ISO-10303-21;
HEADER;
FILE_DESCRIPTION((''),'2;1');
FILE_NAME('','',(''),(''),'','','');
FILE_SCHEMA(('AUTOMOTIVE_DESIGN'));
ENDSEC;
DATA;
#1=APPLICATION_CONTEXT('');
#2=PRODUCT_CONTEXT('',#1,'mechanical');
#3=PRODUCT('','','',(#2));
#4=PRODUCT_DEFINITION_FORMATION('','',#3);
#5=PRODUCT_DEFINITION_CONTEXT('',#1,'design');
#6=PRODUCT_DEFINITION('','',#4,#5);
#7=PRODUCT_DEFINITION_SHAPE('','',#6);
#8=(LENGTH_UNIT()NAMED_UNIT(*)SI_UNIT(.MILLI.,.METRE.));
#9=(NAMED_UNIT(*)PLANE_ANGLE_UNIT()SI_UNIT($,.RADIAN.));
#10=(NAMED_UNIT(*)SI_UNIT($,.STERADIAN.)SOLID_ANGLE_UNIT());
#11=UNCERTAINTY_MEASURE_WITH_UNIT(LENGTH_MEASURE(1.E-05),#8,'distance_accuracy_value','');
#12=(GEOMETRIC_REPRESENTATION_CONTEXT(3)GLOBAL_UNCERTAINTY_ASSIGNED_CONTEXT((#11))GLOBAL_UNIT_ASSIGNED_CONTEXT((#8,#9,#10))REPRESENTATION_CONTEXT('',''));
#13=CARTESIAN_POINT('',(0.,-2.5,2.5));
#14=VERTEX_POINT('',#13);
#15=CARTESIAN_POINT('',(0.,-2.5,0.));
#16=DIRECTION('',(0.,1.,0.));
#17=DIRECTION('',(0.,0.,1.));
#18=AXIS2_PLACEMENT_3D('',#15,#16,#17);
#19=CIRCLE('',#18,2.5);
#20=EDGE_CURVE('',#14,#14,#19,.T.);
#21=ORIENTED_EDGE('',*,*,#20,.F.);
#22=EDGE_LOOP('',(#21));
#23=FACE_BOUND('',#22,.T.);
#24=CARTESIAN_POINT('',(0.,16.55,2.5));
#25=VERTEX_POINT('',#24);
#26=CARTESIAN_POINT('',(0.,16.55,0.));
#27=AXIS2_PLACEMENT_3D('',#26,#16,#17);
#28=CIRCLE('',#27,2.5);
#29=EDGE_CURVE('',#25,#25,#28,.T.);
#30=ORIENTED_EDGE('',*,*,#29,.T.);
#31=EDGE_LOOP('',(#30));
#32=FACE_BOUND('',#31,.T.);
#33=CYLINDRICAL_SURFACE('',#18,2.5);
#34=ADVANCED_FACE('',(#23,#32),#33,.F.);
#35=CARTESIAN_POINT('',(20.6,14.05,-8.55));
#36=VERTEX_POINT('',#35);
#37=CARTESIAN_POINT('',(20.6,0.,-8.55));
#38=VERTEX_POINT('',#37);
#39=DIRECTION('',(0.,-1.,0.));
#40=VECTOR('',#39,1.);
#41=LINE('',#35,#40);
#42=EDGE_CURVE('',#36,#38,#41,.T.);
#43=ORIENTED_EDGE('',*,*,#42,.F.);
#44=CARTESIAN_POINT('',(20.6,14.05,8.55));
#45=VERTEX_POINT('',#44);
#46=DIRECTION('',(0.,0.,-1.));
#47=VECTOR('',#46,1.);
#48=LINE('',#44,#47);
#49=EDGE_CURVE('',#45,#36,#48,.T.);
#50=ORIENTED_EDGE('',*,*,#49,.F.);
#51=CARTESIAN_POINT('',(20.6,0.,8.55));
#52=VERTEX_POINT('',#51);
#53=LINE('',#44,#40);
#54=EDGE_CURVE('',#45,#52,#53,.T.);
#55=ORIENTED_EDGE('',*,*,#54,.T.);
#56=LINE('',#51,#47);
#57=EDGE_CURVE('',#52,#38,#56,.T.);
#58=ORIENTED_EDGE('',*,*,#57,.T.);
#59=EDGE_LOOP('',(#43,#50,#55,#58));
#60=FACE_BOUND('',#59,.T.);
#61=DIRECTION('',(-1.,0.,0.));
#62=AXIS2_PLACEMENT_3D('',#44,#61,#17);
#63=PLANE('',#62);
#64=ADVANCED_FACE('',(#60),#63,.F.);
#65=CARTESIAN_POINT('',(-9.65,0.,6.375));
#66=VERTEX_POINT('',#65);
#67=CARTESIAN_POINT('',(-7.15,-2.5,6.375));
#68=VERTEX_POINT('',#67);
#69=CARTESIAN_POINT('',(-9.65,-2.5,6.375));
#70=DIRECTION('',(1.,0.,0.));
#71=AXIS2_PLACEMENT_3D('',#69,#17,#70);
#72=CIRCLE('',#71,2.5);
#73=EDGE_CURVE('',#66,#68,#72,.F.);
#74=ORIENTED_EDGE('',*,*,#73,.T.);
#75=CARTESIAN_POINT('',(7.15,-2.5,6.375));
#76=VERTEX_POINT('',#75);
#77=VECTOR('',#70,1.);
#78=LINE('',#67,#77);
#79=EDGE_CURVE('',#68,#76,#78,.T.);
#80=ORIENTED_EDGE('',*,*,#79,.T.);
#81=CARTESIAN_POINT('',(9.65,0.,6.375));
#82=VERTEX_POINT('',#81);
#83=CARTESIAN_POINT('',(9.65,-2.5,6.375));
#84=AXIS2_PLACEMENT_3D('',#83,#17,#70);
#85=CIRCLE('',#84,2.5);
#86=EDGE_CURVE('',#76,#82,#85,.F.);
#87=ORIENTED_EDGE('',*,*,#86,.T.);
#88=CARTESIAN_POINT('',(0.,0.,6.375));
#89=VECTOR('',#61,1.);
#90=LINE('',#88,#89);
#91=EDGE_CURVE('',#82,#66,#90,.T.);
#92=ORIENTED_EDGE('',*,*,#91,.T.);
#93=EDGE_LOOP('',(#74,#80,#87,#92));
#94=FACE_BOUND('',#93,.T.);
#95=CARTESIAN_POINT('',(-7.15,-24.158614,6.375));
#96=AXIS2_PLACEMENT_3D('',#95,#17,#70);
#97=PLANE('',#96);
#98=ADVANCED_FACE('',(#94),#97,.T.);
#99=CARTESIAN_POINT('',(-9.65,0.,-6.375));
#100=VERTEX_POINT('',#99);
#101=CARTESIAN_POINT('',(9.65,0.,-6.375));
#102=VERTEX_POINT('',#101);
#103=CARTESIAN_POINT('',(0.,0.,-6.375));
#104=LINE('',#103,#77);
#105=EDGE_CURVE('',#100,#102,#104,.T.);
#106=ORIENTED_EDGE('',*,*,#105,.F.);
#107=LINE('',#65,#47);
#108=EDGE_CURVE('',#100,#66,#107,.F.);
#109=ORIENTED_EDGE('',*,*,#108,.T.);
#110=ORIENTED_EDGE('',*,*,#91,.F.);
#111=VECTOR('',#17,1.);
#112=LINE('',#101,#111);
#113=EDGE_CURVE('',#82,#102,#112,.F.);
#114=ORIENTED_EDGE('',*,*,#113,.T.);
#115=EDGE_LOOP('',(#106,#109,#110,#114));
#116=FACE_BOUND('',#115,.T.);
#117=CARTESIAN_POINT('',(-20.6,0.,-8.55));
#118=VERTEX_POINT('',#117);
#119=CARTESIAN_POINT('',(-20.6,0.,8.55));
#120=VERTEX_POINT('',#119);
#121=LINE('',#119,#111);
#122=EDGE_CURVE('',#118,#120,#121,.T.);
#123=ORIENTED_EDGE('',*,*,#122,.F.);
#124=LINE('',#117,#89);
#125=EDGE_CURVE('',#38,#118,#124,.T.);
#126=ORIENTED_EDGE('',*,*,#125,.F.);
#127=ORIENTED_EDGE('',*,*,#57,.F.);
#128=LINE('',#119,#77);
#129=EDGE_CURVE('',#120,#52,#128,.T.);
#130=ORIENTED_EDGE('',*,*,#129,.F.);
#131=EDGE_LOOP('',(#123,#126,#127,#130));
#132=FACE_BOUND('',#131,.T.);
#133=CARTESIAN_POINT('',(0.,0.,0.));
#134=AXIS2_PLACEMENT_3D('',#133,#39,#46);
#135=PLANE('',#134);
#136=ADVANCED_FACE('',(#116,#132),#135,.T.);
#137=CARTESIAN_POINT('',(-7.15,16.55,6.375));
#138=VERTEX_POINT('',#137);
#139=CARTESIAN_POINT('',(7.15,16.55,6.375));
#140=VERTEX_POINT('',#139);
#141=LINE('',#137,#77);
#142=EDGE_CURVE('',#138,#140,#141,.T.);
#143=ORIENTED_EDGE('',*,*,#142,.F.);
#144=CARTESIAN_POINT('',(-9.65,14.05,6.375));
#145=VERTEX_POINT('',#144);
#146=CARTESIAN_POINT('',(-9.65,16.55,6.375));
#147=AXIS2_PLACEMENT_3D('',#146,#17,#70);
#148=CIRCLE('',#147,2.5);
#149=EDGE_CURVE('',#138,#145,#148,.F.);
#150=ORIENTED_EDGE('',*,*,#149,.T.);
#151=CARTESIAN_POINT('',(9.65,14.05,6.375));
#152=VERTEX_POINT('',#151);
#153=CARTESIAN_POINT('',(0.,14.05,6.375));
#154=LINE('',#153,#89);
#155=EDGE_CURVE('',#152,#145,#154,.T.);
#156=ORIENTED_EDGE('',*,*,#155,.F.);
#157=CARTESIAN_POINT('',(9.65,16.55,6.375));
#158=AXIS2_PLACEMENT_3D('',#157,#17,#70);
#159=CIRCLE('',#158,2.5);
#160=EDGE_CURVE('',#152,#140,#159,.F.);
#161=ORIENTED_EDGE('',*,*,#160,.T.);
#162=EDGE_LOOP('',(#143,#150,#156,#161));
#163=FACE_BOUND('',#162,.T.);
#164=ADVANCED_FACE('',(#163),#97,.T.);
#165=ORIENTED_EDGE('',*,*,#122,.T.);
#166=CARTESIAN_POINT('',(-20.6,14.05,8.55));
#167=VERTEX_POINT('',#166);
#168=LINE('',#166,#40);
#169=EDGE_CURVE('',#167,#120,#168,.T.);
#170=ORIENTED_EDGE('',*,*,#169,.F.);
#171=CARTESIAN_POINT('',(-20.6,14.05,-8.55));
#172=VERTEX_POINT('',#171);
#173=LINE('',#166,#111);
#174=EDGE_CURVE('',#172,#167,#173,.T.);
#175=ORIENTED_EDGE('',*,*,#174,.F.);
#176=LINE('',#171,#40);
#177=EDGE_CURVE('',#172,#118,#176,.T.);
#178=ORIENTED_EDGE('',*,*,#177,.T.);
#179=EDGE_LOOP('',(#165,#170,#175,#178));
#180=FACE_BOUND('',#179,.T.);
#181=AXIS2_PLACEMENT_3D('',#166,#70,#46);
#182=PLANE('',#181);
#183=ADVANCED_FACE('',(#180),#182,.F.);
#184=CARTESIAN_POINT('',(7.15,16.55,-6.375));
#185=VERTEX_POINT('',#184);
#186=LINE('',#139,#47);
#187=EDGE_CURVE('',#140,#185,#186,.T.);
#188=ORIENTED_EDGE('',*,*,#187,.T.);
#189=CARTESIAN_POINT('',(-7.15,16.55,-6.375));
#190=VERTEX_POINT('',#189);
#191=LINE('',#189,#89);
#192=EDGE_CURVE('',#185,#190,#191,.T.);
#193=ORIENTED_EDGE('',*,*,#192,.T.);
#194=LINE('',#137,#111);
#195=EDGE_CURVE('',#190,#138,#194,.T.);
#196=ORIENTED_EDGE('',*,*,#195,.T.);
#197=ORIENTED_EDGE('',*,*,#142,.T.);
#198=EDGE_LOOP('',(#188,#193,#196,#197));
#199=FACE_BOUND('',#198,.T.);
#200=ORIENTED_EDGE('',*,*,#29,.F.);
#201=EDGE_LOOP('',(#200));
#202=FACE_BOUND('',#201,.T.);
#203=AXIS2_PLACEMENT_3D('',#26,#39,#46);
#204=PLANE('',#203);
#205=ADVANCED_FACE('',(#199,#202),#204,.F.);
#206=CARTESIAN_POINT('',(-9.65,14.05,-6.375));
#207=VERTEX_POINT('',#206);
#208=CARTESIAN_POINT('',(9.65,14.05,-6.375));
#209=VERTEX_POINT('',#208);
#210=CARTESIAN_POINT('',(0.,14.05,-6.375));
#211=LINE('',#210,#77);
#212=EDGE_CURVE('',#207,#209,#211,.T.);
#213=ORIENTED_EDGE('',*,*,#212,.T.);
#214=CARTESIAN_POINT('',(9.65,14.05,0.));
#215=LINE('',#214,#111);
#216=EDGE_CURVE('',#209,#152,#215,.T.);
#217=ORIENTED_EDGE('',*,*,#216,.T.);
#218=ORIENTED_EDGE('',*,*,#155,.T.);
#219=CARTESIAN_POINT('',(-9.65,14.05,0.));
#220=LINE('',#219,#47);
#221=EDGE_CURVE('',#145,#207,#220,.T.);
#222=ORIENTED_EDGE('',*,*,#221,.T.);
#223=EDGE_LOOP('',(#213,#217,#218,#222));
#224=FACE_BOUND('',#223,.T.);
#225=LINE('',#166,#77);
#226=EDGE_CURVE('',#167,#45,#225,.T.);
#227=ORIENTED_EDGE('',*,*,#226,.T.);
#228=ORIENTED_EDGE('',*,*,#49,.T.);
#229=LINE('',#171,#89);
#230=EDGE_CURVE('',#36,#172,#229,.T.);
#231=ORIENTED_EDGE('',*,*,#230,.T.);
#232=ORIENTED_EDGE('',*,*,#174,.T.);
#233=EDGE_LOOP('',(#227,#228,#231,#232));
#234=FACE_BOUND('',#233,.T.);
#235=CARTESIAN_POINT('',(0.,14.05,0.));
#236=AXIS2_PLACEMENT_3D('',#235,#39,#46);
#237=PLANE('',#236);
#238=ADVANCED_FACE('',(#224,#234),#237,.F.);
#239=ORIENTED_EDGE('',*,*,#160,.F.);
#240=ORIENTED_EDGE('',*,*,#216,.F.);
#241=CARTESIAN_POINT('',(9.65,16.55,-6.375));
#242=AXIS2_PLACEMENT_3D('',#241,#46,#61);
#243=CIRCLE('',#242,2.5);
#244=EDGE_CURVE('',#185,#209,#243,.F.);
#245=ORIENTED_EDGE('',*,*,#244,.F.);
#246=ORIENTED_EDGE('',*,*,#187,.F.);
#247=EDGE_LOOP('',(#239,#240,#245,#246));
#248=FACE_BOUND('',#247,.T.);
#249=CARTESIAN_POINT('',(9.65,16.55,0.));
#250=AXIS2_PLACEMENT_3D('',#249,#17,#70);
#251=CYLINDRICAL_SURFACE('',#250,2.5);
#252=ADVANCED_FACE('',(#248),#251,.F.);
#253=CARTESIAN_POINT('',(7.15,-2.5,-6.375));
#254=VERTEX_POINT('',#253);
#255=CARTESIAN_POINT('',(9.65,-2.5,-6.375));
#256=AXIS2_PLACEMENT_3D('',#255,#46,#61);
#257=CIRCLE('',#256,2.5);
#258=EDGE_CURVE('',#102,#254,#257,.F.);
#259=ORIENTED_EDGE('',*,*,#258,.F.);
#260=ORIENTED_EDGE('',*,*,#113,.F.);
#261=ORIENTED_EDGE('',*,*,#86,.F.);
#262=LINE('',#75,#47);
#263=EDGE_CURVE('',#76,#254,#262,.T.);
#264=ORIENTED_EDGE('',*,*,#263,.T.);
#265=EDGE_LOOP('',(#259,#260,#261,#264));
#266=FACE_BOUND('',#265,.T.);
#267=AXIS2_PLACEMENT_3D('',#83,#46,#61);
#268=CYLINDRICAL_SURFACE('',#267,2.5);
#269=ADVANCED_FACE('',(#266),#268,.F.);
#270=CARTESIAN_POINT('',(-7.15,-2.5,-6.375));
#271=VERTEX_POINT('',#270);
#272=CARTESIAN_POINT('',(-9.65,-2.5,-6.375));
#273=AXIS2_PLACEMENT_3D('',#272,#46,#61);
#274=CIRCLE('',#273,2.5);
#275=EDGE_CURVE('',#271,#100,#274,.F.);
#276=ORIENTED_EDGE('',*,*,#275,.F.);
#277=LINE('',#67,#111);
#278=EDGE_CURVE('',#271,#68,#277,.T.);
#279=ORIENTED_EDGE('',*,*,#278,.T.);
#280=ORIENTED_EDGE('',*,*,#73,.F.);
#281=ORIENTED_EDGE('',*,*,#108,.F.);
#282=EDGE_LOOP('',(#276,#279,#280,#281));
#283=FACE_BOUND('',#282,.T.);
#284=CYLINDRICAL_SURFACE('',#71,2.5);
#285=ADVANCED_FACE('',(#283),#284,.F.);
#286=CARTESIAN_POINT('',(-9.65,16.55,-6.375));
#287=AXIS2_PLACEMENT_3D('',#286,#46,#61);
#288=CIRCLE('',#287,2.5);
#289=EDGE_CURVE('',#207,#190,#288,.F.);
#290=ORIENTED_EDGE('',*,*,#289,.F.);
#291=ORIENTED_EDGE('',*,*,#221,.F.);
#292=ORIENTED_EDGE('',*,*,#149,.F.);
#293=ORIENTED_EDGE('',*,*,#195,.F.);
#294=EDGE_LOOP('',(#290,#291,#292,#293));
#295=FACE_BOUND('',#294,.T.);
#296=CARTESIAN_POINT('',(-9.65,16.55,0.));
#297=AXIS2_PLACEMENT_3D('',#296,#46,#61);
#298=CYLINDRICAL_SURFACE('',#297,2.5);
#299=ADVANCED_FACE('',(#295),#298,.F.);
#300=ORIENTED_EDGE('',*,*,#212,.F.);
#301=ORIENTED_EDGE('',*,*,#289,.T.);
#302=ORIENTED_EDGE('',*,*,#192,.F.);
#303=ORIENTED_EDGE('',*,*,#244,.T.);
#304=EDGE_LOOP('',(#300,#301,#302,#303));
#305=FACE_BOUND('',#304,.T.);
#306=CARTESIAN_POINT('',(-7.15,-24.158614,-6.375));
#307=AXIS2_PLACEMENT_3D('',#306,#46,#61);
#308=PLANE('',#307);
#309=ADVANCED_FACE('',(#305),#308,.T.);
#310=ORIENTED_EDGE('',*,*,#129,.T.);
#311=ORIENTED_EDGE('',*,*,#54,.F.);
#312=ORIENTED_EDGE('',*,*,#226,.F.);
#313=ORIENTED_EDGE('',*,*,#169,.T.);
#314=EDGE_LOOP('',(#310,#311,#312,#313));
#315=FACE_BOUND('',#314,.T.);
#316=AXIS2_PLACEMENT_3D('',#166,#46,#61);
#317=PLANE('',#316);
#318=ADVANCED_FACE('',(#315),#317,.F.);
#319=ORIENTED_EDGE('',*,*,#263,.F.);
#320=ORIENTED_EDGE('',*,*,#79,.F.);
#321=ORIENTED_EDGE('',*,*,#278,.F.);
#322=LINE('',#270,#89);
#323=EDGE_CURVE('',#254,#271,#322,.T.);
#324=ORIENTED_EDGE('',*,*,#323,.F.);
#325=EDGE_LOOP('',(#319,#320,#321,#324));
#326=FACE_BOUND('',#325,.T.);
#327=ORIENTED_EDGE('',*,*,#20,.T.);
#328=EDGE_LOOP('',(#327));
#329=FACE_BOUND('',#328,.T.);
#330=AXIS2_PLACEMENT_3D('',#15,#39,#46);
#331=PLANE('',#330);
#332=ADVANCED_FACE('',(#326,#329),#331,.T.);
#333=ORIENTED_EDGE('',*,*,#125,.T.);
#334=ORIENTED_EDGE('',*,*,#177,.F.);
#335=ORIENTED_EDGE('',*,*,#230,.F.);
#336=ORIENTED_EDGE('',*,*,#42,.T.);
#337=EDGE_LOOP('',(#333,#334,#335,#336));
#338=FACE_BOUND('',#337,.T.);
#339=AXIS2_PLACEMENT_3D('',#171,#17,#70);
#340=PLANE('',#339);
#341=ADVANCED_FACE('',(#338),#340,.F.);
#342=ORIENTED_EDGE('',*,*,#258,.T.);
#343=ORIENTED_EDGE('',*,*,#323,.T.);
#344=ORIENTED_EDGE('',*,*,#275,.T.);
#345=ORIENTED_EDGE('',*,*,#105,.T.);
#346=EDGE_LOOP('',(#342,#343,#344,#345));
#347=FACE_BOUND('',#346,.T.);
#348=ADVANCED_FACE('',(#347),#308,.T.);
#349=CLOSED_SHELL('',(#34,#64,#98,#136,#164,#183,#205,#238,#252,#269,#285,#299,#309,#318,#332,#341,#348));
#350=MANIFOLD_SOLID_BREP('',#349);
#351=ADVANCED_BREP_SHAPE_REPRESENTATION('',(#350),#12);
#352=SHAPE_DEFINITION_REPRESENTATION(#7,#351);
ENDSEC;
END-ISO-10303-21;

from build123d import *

# Parameters (mm, degrees)
SKETCH1_W           = 41.2
SKETCH1_H           = 17.1
BOSS_EXTRUDE1_DEPTH = 14.05
BOSS_EXTRUDE2_START = 2.5
SKETCH2_W           = 14.3
SKETCH2_H           = 12.75
BOSS_EXTRUDE2_DEPTH = 19.05
FILLET1_R           = 2.5
SKETCH3_R           = 2.5
CUT_EXTRUDE1_DEPTH  = 30.331979135


with BuildPart() as part:
    # Sketch1 → Boss-Extrude1 (new body)
    with BuildSketch(Plane(origin=(0, 0, 0), x_dir=(1, 0, 0), z_dir=(0, 1, 0))):
        Rectangle(SKETCH1_W, SKETCH1_H)
    extrude(amount=BOSS_EXTRUDE1_DEPTH)

    # Sketch2 → Boss-Extrude2 (add)
    with BuildSketch(Plane(origin=(0, 14.05, 0), x_dir=(1, 0, 0), z_dir=(0, 1, 0)).offset(BOSS_EXTRUDE2_START)):
        Rectangle(SKETCH2_W, SKETCH2_H)
    extrude(amount=-BOSS_EXTRUDE2_DEPTH)

    # Fillet1
    fillet1_edges = [part.edges().sort_by_distance(p)[0] for p in [
        (7.15, 0, 0),
        (-7.15, 0, 0),
        (-7.15, 14.05, 0),
        (7.15, 14.05, 0),
    ]]
    fillet(fillet1_edges, radius=FILLET1_R - 0.0001)  # a hair under: the kernel refuses the full size

    # Sketch3 → Cut-Extrude1 (cut, through all)
    with BuildSketch(Plane(origin=(0, 16.55, 0), x_dir=(1, 0, 0), z_dir=(0, 1, 0))):
        with Locations(Location((0, 0, 0), (0, 0, 270))):
            Circle(SKETCH3_R)
    extrude(amount=-CUT_EXTRUDE1_DEPTH, mode=Mode.SUBTRACT)


solid = part.part
